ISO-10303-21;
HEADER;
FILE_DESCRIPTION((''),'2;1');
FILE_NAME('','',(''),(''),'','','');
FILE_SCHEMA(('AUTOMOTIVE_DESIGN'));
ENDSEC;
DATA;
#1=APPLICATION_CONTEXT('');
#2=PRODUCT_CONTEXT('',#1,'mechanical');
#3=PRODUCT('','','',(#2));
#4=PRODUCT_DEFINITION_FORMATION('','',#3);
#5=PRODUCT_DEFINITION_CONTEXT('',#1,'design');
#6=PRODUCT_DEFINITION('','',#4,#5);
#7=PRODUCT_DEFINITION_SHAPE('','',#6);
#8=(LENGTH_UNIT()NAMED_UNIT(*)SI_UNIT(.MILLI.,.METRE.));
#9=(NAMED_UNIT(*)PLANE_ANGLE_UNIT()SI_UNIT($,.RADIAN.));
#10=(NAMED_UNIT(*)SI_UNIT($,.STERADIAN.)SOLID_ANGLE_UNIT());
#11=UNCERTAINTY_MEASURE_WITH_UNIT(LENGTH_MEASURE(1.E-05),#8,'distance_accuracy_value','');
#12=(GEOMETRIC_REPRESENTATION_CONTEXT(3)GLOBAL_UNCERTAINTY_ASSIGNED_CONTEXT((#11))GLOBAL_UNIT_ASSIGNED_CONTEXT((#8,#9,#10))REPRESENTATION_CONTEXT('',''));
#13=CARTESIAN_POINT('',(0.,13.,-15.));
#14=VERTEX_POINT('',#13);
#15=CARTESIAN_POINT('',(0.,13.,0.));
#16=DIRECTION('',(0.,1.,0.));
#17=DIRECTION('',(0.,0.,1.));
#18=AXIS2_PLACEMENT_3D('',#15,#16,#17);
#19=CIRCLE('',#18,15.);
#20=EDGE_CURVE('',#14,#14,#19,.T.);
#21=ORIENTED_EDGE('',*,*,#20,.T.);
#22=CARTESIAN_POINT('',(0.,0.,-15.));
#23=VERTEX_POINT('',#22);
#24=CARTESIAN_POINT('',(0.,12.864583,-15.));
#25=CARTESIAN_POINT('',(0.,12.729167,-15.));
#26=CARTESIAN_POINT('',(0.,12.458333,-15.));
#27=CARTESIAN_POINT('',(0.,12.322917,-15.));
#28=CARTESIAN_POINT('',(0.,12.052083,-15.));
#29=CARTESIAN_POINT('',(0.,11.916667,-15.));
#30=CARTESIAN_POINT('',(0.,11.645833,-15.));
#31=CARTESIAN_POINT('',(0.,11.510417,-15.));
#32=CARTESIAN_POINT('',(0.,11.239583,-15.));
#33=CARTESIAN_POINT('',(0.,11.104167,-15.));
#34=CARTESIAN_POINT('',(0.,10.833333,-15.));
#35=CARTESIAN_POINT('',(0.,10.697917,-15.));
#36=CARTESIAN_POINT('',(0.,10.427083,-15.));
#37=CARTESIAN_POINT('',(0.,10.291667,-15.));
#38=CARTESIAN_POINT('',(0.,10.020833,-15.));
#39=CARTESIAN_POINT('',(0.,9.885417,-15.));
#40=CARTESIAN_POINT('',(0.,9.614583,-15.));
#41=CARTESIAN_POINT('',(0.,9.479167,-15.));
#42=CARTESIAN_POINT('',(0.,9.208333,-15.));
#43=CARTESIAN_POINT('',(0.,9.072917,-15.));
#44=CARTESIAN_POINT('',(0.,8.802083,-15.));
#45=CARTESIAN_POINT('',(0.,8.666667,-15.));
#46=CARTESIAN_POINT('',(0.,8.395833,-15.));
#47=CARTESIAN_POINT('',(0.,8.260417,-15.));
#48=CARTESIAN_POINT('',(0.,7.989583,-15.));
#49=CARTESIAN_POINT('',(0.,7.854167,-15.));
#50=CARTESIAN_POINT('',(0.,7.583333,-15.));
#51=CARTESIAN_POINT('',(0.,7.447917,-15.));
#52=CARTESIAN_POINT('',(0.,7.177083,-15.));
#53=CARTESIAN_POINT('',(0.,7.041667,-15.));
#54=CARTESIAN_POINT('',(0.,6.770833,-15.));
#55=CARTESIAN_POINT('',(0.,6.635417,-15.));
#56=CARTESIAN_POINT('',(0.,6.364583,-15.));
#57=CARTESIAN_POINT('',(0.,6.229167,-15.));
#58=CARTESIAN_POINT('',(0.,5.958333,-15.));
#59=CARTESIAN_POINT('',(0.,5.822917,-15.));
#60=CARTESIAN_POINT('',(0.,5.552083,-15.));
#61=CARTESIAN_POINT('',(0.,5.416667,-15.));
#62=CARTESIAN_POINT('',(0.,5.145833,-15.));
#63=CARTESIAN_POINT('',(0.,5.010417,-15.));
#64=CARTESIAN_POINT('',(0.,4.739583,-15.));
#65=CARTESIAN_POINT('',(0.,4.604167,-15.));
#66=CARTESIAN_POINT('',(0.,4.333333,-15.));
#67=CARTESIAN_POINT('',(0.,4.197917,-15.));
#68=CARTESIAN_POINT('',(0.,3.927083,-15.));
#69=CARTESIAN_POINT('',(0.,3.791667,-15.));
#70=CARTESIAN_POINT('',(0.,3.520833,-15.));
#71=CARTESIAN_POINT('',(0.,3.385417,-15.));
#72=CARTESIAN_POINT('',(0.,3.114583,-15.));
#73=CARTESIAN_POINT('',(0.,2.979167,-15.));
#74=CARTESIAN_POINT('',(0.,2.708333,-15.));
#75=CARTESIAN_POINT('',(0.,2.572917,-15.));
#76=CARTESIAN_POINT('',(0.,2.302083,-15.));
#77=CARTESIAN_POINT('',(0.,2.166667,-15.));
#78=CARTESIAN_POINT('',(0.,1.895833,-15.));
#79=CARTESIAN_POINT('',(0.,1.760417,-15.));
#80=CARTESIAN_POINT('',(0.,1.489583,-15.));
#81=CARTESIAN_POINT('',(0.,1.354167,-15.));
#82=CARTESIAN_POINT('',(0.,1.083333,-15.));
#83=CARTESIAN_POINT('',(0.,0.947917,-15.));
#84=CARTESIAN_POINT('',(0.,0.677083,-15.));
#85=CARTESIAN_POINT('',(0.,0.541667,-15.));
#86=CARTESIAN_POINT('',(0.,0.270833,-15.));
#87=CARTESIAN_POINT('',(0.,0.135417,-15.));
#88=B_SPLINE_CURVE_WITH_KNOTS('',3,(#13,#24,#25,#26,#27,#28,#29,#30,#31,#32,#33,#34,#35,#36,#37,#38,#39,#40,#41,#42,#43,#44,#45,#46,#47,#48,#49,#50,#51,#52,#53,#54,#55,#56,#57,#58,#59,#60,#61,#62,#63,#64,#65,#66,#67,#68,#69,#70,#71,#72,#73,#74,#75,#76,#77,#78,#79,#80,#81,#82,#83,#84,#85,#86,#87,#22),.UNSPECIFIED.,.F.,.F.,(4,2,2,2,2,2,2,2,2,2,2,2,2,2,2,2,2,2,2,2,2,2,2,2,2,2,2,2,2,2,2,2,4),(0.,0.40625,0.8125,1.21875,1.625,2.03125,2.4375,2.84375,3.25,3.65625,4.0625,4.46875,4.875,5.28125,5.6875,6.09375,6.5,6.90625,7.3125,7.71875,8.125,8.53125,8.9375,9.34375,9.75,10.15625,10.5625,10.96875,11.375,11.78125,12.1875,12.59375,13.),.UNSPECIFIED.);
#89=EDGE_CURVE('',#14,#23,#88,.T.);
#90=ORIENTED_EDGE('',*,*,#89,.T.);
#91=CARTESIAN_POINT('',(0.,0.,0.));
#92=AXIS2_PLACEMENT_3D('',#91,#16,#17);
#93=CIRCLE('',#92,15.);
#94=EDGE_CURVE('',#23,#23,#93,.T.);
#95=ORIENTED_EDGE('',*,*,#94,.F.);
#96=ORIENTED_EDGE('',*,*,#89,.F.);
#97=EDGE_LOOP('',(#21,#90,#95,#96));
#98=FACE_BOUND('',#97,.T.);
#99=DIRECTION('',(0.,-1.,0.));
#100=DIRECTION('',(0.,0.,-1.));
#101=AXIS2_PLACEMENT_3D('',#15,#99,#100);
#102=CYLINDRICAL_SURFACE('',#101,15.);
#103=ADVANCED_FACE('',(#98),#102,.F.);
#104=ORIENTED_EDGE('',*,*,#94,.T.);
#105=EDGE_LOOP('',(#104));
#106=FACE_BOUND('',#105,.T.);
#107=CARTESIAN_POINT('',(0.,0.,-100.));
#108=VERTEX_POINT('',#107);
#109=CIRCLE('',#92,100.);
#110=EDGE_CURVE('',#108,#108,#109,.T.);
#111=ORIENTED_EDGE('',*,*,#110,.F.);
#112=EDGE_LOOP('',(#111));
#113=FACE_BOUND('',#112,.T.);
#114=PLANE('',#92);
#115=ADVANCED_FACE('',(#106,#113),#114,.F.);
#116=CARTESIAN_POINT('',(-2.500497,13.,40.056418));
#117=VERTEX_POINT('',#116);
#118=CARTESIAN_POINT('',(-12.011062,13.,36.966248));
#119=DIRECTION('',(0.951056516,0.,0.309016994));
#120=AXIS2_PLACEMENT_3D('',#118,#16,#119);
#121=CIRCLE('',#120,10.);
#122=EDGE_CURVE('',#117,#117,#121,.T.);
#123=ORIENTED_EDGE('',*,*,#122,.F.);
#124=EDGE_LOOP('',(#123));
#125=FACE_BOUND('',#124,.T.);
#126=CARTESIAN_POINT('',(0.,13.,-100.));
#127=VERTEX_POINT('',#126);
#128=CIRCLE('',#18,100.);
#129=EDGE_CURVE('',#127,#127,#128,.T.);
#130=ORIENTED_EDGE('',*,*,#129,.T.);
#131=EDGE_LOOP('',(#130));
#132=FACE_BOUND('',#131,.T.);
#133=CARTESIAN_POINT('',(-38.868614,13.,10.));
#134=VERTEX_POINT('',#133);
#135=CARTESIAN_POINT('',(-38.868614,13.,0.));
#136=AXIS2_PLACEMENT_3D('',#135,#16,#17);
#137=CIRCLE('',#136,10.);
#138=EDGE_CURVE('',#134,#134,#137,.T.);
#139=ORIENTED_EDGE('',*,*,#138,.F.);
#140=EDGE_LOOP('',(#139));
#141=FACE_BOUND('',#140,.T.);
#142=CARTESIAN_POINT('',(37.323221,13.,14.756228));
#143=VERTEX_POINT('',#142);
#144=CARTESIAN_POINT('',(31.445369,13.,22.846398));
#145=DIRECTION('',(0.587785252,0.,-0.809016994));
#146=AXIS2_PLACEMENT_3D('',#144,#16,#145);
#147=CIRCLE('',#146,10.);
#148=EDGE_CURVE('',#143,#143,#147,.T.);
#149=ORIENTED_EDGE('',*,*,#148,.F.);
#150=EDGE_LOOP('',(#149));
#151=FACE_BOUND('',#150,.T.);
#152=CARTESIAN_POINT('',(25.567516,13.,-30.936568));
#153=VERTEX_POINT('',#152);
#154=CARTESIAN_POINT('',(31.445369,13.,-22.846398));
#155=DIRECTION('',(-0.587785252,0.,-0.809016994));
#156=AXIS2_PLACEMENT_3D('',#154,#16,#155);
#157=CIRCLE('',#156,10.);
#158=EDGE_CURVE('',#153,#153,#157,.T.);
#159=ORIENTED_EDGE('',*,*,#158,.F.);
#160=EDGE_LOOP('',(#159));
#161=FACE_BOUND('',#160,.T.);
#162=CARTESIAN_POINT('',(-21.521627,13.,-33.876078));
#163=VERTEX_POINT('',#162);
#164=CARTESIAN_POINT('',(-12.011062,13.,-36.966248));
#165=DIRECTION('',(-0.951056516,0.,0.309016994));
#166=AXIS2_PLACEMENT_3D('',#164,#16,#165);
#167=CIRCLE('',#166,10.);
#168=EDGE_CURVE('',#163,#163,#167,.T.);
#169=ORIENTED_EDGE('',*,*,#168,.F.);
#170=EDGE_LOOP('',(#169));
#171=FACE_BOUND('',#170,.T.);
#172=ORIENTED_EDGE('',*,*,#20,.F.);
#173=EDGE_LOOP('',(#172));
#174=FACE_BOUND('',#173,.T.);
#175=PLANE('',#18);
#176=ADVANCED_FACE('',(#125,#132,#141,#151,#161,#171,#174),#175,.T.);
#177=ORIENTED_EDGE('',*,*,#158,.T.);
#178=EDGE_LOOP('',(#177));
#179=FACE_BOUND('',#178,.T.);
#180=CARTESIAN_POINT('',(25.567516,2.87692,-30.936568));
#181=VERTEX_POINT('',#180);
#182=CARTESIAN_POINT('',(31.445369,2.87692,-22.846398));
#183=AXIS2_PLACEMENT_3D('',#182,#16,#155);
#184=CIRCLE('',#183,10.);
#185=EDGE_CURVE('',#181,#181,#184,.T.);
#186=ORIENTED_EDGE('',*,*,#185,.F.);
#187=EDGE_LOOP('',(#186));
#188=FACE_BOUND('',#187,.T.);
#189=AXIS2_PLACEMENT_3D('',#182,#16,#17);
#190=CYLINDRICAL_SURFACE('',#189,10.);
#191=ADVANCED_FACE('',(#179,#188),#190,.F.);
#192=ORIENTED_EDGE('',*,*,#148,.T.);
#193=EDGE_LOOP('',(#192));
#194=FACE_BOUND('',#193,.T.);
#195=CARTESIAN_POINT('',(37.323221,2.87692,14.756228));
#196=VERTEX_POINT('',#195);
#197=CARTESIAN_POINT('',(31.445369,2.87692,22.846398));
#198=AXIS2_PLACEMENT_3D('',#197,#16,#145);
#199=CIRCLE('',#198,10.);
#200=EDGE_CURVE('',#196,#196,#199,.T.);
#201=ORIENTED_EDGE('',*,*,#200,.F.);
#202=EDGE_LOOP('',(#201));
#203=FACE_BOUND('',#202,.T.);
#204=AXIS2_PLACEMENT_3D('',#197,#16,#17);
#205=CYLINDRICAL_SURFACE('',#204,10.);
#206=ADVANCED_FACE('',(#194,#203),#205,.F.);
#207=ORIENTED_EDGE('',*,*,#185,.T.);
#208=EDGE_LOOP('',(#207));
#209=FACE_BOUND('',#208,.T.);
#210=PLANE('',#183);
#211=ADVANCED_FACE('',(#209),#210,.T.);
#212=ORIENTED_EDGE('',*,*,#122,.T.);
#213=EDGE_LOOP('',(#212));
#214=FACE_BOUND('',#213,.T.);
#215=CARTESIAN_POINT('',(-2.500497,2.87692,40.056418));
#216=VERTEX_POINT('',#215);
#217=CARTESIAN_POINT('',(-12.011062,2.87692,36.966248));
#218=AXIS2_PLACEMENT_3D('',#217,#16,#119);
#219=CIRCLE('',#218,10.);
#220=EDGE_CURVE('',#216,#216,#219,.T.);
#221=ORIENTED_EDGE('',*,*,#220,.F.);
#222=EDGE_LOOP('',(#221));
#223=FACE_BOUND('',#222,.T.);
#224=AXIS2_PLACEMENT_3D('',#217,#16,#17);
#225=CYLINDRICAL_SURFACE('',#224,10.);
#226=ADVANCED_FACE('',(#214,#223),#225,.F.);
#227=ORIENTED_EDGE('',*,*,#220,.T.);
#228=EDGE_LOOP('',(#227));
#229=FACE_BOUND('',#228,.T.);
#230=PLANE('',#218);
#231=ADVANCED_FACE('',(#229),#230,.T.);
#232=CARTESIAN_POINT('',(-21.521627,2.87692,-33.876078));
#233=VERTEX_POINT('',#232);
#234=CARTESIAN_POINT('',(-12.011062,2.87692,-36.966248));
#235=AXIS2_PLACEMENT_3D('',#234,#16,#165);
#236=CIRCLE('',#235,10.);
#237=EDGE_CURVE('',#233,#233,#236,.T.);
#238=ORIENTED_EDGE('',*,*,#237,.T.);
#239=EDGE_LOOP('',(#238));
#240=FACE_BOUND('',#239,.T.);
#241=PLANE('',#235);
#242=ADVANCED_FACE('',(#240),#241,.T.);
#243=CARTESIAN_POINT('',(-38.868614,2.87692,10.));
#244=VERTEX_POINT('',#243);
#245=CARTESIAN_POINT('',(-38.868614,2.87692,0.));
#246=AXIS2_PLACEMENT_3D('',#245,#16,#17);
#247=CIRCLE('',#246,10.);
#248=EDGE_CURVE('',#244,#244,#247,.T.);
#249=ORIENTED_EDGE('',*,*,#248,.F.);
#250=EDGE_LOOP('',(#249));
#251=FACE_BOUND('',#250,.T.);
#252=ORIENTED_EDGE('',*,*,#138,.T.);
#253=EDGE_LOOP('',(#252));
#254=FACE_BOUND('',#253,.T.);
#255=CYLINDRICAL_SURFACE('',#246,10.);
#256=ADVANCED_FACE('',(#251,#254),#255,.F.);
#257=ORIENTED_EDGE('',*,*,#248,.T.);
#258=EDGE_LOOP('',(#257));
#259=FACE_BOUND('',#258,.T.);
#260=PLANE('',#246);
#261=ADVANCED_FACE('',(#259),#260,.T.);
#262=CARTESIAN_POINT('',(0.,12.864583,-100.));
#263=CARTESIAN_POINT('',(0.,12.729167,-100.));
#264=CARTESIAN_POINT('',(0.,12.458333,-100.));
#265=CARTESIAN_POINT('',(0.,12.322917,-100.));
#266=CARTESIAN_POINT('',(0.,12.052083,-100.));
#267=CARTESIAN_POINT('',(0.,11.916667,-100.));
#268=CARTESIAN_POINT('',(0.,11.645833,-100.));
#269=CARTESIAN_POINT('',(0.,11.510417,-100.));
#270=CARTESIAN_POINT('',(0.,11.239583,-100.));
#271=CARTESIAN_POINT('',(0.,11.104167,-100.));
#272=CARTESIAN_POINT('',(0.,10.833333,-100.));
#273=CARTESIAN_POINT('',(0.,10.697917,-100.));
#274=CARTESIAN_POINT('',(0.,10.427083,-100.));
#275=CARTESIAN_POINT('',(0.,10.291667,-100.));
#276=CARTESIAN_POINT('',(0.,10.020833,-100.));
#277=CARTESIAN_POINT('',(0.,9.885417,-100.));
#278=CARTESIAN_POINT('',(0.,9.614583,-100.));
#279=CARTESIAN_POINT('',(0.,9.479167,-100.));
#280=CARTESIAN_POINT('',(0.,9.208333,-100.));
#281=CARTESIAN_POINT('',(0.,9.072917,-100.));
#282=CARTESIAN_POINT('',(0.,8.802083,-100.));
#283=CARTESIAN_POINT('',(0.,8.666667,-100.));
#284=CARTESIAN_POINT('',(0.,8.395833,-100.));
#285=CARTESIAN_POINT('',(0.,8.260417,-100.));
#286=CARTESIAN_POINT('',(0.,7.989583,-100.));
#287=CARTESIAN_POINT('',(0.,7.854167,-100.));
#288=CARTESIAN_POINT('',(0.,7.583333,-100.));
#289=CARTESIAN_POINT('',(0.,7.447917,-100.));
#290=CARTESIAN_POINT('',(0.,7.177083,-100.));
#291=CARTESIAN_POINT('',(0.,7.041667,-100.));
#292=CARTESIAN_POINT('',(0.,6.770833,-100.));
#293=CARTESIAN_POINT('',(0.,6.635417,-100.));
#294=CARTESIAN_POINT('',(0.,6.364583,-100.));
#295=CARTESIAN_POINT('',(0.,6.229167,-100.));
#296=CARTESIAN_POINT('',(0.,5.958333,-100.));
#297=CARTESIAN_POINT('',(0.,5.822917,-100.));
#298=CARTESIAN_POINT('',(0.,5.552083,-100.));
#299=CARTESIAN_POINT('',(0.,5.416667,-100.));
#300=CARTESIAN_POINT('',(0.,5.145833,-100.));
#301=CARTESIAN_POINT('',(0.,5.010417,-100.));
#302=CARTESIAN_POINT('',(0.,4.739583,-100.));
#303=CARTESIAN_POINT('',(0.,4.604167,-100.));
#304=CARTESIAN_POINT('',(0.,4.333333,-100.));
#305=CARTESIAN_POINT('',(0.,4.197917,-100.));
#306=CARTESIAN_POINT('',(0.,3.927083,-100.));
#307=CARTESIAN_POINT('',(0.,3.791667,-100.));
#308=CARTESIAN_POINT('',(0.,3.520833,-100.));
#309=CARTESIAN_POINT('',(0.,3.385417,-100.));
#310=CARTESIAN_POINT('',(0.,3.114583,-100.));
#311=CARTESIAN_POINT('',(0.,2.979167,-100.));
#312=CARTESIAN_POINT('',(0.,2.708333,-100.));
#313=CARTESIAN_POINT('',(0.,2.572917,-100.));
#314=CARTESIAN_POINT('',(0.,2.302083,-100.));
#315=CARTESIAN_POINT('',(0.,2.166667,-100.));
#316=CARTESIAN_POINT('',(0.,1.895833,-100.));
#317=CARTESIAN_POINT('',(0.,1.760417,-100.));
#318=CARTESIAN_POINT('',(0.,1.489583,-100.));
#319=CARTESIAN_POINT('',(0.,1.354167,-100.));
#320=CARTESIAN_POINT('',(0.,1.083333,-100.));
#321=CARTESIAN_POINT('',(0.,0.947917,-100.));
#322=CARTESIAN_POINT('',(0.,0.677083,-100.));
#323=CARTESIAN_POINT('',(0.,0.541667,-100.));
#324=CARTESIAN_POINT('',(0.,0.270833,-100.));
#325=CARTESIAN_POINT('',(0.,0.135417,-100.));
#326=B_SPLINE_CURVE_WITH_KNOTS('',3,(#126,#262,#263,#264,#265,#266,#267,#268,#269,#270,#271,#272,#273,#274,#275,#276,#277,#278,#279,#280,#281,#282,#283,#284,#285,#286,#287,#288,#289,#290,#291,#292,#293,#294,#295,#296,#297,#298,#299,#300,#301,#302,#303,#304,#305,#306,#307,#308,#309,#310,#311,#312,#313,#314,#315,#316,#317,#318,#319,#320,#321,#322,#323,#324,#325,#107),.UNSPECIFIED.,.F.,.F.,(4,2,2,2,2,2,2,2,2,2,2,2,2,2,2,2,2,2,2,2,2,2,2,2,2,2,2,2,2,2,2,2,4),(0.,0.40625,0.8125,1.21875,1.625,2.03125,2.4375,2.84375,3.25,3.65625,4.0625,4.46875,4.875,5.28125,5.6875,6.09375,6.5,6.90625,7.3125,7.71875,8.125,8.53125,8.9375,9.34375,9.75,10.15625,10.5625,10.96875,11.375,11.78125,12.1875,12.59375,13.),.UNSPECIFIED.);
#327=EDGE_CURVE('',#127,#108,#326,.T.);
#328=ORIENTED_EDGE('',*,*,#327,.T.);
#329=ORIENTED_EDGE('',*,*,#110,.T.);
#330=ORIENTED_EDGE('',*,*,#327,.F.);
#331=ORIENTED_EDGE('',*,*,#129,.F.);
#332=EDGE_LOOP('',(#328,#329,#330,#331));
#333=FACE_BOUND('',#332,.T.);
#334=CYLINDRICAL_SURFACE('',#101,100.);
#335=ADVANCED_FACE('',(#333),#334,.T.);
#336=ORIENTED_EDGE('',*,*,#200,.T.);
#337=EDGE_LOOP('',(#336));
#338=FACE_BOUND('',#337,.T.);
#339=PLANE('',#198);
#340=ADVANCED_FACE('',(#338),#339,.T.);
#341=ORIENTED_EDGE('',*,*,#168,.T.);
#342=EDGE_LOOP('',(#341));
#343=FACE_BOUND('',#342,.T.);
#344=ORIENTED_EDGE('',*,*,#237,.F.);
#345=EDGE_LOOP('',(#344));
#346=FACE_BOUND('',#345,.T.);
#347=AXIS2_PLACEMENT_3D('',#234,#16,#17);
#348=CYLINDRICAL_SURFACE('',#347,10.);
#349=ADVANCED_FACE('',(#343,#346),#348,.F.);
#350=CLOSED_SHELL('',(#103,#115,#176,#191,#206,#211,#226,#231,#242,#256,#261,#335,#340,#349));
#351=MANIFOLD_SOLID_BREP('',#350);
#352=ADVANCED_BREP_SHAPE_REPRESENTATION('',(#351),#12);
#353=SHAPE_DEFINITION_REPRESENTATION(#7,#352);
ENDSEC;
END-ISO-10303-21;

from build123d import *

# Parameters (mm, degrees)
SKETCH1_R           = 100
BOSS_EXTRUDE1_DEPTH = 13
SKETCH2_R           = 15
CUT_EXTRUDE1_DEPTH  = 143.017604543
SKETCH3_R           = 10
CUT_EXTRUDE2_DEPTH  = 10.123079741
CIRPATTERN1_COUNT   = 5


with BuildPart() as part:
    # Sketch1 → Boss-Extrude1 (new body)
    with BuildSketch(Plane(origin=(0, 0, 0), x_dir=(1, 0, 0), z_dir=(0, 1, 0))):
        Circle(SKETCH1_R)
    extrude(amount=BOSS_EXTRUDE1_DEPTH)

    # Sketch2 → Cut-Extrude1 (cut, through all)
    with BuildSketch(Plane(origin=(0, 0, 0), x_dir=(1, 0, 0), z_dir=(0, 1, 0))):
        Circle(SKETCH2_R)
    extrude(amount=CUT_EXTRUDE1_DEPTH, mode=Mode.SUBTRACT)

    # Sketch3 → Cut-Extrude2 (cut)
    with BuildSketch(Plane(origin=(0, 13, 0), x_dir=(1, 0, 0), z_dir=(0, 1, 0))):
        with Locations((-38.868613622, 0)):
            Circle(SKETCH3_R)
    cut_extrude2 = extrude(amount=-CUT_EXTRUDE2_DEPTH, mode=Mode.SUBTRACT)

    # CirPattern1: Cut-Extrude2 ×5 about axis
    cirpattern1_axis = Axis((0, 0, 0), (0, 1, 0))
    for i in range(1, CIRPATTERN1_COUNT):
        add(cut_extrude2.rotate(cirpattern1_axis, i * 360 / CIRPATTERN1_COUNT), mode=Mode.SUBTRACT)


solid = part.part
